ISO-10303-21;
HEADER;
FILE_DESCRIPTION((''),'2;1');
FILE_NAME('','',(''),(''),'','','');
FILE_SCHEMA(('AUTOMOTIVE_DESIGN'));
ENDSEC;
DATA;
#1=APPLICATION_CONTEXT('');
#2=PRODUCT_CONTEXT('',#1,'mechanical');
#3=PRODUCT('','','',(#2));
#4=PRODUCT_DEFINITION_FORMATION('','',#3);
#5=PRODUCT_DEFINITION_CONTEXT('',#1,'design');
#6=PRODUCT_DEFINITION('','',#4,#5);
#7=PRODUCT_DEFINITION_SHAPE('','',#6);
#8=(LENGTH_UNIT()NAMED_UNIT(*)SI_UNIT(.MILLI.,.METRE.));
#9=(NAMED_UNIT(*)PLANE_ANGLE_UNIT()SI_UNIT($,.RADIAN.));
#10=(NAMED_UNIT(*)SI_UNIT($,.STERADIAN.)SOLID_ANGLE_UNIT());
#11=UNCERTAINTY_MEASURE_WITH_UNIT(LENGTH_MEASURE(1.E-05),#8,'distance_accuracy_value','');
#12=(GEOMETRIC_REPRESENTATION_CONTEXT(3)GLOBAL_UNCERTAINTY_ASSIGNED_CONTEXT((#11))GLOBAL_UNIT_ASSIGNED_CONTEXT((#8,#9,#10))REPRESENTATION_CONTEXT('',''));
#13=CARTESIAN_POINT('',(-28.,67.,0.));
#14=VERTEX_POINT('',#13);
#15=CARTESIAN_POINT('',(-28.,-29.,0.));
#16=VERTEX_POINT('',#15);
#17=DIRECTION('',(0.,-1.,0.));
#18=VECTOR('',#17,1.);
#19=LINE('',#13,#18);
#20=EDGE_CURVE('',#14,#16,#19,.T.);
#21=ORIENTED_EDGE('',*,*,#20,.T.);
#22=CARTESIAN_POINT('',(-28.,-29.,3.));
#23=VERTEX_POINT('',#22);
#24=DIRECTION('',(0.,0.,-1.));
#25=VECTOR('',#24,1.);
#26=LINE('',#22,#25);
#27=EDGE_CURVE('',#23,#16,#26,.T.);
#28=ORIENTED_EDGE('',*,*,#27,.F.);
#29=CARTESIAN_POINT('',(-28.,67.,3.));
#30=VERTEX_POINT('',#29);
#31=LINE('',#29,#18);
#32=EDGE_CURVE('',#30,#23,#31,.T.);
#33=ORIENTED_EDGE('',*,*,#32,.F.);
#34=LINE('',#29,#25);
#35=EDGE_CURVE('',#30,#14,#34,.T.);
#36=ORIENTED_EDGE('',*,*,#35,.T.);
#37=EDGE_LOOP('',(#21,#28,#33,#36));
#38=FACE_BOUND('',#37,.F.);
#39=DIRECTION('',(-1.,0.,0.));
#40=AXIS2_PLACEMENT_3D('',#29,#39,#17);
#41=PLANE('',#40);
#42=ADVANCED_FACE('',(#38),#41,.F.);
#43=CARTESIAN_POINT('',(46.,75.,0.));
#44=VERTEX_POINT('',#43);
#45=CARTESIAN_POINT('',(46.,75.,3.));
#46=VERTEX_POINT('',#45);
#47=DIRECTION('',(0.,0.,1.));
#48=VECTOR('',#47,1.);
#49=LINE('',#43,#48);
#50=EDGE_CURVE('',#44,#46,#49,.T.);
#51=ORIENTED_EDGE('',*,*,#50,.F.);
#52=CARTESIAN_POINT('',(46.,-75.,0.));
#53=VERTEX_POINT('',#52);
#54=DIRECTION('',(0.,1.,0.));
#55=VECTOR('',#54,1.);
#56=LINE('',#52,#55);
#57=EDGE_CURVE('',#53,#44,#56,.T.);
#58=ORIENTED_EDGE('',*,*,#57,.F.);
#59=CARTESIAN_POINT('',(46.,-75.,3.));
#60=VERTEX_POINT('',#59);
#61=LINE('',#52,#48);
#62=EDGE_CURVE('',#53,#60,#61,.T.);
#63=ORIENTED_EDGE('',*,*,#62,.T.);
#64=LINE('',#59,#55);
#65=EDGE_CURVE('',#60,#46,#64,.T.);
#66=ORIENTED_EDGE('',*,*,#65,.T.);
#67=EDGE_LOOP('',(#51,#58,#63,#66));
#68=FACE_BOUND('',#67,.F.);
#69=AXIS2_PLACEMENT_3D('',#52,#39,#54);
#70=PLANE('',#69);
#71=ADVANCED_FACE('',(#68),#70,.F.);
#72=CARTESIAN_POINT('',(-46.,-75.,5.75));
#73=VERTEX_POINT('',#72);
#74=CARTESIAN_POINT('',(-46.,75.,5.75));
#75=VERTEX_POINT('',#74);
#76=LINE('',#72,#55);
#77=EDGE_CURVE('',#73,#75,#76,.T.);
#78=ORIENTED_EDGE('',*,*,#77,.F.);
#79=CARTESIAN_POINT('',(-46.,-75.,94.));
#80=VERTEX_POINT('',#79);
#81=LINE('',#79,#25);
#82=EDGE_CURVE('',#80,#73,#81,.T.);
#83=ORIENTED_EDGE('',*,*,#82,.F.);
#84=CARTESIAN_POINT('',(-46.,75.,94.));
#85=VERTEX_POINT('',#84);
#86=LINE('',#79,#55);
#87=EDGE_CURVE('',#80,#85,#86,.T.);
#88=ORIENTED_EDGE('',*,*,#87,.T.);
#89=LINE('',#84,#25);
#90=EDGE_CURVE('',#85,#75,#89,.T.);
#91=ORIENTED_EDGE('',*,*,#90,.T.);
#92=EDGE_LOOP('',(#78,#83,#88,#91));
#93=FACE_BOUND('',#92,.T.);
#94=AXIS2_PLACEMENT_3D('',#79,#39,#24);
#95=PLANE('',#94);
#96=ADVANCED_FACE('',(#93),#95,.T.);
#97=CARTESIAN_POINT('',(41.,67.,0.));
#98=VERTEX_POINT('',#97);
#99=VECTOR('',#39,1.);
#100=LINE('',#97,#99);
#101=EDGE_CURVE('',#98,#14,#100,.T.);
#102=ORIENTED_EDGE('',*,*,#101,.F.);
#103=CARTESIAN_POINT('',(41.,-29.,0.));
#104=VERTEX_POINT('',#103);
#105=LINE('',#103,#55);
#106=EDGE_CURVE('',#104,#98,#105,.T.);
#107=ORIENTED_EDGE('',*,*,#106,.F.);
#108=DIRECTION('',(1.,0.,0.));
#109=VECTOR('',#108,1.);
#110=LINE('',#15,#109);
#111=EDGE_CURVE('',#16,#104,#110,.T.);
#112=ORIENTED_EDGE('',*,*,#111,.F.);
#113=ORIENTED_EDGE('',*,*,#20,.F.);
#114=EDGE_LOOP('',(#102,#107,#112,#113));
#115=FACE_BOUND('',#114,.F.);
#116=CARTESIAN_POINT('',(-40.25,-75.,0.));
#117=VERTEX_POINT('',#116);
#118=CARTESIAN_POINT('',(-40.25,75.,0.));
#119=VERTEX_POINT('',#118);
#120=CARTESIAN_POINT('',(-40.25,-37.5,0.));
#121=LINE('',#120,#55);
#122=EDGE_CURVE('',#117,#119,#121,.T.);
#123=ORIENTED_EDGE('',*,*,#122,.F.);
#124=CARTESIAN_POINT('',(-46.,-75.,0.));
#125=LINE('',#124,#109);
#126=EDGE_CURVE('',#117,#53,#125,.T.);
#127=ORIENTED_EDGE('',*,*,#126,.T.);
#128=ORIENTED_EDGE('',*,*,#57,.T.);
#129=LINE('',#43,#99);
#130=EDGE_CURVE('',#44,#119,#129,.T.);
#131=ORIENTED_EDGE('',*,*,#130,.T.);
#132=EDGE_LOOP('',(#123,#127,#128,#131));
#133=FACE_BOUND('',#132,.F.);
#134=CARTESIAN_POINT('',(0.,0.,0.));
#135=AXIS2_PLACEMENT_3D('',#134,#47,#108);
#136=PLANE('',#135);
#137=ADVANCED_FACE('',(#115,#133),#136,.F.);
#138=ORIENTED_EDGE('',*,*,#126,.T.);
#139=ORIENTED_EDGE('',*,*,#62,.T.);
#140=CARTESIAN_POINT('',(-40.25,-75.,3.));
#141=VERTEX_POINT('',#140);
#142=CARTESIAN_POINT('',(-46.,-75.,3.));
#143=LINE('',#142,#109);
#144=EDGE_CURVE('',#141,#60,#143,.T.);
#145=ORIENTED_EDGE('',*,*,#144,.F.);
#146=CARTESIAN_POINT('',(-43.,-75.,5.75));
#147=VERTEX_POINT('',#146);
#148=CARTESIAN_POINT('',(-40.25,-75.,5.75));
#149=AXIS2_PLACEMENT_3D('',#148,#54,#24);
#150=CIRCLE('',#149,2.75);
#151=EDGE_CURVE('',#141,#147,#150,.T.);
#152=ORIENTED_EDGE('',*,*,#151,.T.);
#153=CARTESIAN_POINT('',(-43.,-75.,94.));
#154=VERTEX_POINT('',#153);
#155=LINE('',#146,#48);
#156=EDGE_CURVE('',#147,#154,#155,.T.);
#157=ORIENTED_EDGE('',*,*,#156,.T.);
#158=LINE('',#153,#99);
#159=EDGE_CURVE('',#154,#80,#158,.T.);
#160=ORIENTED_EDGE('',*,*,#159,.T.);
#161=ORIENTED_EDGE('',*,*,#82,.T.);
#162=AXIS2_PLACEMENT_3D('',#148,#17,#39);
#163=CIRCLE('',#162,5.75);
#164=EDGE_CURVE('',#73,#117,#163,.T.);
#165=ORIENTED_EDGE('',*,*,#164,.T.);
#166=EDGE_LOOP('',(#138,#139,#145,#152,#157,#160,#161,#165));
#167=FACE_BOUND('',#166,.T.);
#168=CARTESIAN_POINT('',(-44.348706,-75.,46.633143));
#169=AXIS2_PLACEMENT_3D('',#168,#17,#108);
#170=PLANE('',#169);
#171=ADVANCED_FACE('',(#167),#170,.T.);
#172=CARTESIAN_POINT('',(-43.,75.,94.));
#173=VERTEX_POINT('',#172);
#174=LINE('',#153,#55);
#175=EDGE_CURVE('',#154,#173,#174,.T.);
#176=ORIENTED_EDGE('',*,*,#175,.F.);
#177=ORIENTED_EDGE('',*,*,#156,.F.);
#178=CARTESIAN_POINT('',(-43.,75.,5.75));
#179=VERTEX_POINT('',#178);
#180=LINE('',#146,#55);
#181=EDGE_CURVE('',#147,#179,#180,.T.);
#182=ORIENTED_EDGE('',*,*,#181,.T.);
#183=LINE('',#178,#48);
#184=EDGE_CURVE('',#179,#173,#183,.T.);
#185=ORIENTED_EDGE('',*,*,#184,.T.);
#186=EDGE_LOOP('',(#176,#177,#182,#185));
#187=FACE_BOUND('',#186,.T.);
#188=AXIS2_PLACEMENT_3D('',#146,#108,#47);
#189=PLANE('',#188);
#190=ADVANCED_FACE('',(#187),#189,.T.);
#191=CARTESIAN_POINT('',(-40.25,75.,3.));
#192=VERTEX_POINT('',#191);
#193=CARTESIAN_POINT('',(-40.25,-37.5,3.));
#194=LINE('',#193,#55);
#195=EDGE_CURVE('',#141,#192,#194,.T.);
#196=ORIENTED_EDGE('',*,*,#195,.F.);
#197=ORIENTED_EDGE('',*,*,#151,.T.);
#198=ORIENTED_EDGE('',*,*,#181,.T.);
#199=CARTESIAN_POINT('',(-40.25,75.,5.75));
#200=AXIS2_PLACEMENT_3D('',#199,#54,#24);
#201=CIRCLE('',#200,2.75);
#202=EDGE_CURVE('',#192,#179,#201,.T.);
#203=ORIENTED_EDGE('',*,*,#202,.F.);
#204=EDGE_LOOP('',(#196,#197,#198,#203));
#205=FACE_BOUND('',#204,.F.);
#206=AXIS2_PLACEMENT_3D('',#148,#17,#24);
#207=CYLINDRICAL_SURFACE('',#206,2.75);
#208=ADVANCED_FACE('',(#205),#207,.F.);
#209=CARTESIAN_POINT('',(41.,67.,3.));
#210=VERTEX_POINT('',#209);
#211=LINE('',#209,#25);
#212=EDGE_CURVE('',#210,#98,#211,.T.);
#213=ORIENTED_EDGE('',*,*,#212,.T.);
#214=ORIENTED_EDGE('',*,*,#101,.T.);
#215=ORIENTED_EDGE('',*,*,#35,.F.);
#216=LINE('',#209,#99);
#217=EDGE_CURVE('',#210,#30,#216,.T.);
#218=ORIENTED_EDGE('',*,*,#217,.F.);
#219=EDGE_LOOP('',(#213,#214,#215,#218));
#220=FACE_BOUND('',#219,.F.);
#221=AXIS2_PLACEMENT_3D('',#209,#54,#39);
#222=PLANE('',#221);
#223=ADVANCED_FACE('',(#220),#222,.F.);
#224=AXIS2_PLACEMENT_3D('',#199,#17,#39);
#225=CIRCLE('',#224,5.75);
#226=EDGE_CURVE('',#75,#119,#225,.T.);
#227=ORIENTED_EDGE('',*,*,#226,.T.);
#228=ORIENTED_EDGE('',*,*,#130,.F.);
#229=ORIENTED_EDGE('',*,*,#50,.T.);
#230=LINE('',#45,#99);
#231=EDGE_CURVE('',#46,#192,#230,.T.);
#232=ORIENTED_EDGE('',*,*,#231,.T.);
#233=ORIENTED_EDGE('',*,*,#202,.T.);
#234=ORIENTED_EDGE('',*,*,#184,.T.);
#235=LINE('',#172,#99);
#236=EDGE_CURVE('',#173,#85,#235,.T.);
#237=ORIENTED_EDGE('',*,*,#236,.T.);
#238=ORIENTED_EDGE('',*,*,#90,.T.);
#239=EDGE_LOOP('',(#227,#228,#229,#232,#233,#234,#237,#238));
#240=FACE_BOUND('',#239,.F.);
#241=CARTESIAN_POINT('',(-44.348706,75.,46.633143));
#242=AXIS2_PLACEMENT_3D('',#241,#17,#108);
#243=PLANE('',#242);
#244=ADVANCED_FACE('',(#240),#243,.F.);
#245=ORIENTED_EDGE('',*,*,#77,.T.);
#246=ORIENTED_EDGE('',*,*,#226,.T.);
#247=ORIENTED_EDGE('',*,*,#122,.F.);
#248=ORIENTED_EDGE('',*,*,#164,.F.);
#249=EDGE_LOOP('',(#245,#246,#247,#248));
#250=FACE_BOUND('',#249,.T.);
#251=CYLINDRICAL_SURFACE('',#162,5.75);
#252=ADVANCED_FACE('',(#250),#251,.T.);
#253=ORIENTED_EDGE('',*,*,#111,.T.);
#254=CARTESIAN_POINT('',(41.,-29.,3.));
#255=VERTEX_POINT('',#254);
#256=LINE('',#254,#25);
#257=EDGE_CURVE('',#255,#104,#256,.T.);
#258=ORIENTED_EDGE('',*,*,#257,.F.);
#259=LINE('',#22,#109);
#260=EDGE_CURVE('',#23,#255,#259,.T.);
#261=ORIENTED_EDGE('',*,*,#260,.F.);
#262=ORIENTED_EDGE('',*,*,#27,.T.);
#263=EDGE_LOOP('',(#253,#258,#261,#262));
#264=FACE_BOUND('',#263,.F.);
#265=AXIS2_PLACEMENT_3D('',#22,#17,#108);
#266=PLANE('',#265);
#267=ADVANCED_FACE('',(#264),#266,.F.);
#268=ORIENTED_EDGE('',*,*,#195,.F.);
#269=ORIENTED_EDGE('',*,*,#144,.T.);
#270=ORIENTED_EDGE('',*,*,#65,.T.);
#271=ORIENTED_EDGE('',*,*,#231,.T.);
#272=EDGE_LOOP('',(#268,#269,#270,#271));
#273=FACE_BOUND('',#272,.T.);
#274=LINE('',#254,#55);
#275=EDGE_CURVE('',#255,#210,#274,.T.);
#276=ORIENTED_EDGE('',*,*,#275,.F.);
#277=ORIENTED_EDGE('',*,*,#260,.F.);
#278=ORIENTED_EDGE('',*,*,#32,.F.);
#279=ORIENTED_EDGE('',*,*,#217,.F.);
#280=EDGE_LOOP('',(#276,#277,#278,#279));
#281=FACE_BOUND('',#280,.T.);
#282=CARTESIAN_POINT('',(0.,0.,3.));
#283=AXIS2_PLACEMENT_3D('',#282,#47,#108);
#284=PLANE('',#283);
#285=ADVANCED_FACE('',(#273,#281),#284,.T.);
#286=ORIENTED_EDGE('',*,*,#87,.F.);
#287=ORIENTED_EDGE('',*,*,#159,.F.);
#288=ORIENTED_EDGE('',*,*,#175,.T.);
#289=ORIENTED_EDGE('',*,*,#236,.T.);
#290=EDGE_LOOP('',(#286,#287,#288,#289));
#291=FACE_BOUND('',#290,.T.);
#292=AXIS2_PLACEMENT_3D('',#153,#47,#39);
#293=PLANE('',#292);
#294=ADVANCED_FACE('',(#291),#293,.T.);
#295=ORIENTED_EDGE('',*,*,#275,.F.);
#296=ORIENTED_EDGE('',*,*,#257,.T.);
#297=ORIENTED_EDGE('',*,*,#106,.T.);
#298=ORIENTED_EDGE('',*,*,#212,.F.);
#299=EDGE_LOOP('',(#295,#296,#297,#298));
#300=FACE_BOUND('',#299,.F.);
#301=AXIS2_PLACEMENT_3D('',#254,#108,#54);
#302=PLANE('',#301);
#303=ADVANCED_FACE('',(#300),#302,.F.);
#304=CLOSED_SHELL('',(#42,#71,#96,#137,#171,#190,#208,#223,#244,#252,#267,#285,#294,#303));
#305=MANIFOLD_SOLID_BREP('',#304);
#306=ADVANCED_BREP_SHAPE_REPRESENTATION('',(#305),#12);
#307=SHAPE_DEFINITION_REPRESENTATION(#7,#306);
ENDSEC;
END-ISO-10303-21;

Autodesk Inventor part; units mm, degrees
ref_plane "YZ Plane" through (0, 0, 0) normal (1, 0, 0) x (0, 1, 0)
ref_plane "XZ Plane" through (0, 0, 0) normal (0, 1, 0) x (-1, 0, 0)
ref_plane "XY Plane" through (0, 0, 0) normal (0, 0, 1) x (1, 0, 0)
sketch "Sketch1" plane through (0, 0, 0) normal (0, 0, 1) x (1, 0, 0)
  line L0 (-46, -75) -> (46, -75)
  line L1 (46, -75) -> (46, 75)
  line L2 (46, 75) -> (-46, 75)
  line L3 (-46, 75) -> (-46, -75)
  line L4 (-46, -75) -> (46, 75) construction
  line L5 (46, -75) -> (-46, 75) construction
  point P0 (0, 0)
  dimension "d154" = 92
  dimension "d155" = 150
extrude "Plate5" add sketch "Sketch1" along normal blind 3
sketch "Sketch7" plane through (-43, -75, 0) normal (-1, 0, 0) x (0, -1, 0)
  line L0 (-150, 0) -> (0, 0)
  line L1 (0, 0) -> (0, 94)
  line L2 (0, 94) -> (-150, 94)
  line L3 (-150, 94) -> (-150, 0)
edge flange "Flange3" height 94 angle 90 thickness 3 bend radius 2.75 thickness toward (-1, 0, 0) relief round relief width 3 relief depth 1.5 edges at (-46, 0, 3) wall of the first edge with corners at (-43, 75, 0) (-43, -75, 0) (-43, -75, 94) (-43, 75, 94)
bend "Bend3"
corner "Corner3"
sketch "Sketch8" plane through (0, 0, 3) normal (0, 0, 1) x (1, 0, 0)
  line L0 (46, 75) -> (46, -75) projected
  line L1 (-40.25, 75) -> (46, 75) projected
  line L2 (41, 67) -> (-28, 67)
  line L3 (-28, 67) -> (-28, -29)
  line L4 (-28, -29) -> (41, -29)
  line L5 (41, -29) -> (41, 67)
  line L6 (41, 67) -> (-28, -29) construction
  line L7 (-28, 67) -> (41, -29) construction
  line L8 (-40.25, 75) -> (-43, 75) projected
  point P0 (0, 0)
  point P1 (6.5, 19)
  point P2 (2.875, 75)
  point P3 (-41.625, 75)
  dimension "d167" = 69
  dimension "d168" = 96
  dimension "d169" = 8
  dimension "d174" = 13.625
  dimension "d175" = 5
extrude "Cut1" cut sketch "Sketch8" against normal blind 3
properties part number "PNS 752 FDS 1200 FLANGE 2" material "Stainless Steel"
